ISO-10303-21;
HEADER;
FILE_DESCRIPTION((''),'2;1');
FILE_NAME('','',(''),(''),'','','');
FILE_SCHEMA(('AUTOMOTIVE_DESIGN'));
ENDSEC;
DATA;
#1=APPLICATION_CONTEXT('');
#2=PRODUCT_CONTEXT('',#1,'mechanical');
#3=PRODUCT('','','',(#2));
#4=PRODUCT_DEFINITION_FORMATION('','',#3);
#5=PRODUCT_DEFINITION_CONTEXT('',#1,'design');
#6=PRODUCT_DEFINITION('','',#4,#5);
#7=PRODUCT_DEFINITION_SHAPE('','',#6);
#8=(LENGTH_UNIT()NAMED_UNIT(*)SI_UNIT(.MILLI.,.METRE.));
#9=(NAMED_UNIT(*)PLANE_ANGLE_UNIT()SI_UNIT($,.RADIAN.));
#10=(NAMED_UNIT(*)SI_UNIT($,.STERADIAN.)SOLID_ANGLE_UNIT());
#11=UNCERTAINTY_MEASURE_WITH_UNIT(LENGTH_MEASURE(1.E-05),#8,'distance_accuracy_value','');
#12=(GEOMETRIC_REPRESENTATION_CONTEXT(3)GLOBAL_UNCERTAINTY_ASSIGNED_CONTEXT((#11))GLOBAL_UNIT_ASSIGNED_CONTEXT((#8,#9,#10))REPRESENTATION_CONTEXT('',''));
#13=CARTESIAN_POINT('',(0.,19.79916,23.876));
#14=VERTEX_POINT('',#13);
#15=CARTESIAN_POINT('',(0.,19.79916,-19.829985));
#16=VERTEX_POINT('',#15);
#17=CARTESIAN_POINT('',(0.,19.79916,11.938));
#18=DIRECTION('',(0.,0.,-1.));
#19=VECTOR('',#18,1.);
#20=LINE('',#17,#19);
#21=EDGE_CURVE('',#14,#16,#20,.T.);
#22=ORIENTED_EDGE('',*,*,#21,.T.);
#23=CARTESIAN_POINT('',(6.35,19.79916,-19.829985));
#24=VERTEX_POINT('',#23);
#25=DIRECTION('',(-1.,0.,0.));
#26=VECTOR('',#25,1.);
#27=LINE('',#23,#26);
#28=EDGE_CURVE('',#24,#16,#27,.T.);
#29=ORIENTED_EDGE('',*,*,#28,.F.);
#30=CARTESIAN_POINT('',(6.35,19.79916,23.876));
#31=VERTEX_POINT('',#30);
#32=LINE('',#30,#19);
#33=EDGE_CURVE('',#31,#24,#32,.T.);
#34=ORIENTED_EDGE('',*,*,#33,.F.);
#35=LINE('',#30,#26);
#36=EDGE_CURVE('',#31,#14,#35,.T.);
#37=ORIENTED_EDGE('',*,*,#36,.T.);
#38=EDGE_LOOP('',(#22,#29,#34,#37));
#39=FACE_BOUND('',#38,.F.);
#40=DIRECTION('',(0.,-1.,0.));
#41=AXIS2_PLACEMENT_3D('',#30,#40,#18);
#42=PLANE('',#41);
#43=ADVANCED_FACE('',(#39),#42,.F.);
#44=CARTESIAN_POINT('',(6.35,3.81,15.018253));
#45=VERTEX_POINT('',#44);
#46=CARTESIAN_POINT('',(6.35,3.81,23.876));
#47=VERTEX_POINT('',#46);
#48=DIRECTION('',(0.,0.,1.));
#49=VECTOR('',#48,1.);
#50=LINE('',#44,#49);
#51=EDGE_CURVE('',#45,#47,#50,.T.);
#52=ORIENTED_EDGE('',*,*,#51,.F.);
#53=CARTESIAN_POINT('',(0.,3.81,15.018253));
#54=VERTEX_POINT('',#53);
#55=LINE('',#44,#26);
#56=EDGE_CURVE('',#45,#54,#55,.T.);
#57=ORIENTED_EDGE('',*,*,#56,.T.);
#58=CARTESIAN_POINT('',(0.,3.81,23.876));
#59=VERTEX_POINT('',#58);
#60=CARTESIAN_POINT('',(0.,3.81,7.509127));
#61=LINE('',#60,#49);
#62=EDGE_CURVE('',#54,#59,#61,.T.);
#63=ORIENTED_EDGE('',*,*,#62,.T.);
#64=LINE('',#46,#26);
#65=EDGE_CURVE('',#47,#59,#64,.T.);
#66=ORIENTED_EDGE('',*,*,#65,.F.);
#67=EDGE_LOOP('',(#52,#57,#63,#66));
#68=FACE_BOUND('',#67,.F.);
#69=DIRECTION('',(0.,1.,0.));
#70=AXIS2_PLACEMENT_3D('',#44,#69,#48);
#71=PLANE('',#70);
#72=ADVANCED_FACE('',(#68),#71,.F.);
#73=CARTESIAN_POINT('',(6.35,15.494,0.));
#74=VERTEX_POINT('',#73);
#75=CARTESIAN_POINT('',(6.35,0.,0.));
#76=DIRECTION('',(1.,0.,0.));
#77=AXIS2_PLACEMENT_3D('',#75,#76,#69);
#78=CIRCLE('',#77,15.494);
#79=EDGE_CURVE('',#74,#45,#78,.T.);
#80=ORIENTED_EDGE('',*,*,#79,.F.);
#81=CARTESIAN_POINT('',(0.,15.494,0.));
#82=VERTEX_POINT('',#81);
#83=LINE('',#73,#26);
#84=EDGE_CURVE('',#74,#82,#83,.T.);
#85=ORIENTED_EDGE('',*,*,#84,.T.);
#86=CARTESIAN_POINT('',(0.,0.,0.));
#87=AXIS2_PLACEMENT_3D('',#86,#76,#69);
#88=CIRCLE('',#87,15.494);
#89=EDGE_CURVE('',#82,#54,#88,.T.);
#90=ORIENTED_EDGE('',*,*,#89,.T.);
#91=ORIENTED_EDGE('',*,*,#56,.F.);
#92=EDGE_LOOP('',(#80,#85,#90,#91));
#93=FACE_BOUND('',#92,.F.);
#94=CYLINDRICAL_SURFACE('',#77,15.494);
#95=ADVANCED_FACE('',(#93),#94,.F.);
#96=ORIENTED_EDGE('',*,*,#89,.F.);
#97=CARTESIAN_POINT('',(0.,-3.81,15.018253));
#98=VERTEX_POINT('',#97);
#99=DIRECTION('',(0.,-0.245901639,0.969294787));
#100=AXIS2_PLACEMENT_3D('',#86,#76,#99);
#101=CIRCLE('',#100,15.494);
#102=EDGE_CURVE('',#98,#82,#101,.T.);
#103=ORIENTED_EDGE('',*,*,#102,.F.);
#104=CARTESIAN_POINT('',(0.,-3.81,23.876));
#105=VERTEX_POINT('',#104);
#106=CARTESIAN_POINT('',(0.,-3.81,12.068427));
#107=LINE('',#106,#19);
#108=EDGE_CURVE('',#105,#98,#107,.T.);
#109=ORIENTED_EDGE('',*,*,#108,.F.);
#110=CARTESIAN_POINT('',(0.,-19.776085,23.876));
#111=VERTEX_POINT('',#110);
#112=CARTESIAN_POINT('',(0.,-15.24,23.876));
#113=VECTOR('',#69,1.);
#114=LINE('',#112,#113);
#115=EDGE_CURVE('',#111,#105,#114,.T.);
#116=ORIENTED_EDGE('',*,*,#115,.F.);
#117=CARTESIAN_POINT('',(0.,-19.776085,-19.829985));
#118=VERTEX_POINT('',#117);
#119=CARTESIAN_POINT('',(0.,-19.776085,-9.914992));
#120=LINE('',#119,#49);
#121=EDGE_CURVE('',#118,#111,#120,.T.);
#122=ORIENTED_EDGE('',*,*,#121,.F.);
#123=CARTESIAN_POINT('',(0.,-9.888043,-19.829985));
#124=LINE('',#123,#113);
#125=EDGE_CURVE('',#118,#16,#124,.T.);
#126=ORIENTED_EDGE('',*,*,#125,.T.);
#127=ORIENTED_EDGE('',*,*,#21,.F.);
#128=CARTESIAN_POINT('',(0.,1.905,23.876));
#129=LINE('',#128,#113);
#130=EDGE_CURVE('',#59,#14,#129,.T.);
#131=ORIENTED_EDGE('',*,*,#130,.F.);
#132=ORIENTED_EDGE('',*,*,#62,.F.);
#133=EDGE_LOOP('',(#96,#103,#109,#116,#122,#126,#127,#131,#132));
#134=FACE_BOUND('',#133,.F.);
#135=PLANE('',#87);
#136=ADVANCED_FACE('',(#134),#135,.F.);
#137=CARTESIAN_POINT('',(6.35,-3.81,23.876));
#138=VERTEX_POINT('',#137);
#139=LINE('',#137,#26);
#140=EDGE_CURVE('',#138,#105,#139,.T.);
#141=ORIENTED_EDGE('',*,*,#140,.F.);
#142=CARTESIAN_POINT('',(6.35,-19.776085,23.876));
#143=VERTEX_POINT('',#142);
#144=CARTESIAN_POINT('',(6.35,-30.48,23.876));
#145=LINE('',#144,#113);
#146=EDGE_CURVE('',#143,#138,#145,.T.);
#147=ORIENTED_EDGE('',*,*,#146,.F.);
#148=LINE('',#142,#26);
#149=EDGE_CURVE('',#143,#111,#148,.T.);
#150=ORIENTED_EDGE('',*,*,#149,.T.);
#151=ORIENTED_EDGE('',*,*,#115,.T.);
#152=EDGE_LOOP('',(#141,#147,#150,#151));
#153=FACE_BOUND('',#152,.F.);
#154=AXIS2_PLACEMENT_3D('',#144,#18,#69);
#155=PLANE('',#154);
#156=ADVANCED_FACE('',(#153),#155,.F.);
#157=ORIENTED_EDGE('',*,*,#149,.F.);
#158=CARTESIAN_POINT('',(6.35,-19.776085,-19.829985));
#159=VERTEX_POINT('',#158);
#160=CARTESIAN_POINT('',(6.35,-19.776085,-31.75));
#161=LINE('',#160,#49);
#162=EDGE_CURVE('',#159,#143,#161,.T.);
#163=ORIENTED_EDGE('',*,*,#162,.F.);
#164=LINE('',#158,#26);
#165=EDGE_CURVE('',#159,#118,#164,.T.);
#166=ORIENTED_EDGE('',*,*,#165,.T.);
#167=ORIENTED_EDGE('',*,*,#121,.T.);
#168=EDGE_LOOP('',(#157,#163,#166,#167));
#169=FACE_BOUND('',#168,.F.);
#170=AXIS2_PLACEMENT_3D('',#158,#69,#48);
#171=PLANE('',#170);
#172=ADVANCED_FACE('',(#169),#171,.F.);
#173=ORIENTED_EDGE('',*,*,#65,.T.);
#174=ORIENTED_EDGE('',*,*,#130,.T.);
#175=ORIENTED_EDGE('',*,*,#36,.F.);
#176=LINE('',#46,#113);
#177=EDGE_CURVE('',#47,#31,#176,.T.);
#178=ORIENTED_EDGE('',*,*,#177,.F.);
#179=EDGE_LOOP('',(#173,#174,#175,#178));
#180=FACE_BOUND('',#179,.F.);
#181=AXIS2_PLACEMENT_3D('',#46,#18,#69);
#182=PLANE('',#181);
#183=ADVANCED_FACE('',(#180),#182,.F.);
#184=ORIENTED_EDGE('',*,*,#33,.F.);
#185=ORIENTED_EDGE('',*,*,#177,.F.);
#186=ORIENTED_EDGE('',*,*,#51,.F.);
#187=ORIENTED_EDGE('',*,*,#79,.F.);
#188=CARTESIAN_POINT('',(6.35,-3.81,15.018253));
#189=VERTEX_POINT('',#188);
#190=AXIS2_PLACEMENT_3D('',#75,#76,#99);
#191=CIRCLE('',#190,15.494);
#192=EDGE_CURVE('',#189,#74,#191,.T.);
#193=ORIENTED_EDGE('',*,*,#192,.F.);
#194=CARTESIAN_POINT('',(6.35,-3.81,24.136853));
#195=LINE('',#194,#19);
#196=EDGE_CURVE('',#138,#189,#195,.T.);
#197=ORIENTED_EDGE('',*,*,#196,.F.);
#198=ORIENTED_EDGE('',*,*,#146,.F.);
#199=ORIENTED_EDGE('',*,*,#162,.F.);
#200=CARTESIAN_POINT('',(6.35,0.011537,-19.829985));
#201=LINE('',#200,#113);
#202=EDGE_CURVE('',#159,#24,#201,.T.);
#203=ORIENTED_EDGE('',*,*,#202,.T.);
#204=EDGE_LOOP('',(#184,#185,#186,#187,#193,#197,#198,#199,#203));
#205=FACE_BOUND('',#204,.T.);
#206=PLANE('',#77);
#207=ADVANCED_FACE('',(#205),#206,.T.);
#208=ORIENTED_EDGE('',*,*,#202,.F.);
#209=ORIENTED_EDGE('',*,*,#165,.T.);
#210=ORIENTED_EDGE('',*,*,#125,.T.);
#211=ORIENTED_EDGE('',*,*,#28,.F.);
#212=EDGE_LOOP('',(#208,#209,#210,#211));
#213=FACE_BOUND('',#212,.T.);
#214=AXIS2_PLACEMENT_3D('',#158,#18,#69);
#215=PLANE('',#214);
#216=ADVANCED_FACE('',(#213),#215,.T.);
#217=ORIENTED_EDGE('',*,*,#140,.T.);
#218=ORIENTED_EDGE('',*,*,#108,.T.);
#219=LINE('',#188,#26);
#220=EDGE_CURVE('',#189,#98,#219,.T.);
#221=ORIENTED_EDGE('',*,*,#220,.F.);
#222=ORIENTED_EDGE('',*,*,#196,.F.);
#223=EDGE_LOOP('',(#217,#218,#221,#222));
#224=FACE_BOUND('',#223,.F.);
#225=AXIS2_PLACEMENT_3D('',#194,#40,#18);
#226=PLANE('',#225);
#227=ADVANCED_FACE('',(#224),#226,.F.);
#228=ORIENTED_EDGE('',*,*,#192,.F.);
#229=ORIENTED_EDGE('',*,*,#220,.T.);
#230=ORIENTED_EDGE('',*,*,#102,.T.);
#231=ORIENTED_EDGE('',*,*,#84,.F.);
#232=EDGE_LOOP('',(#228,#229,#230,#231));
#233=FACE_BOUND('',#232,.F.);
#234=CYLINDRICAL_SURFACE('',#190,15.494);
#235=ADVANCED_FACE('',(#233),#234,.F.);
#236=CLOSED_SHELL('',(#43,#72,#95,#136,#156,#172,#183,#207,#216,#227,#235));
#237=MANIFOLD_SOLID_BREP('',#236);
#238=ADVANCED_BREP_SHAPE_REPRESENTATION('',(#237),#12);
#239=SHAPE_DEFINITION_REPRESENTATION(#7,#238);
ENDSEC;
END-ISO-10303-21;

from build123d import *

# Parameters (mm, degrees)
F0_W     = 60.96
F0_H     = 63.5
F1_DEPTH = 6.35
F3_DEPTH = 6.351
F6_DEPTH = 6.351
F7_W     = 39.5752452314
F7_H     = 11.9200152457
F8_DEPTH = 6.351


# Not quite as in the source:
# - a feature of the source that left no trace in its solid (it failed there, or was rolled back) is left out


with BuildPart() as f1:
    # F0 (on Right) → F1 (new body)
    with BuildSketch(Plane.YZ):
        Rectangle(F0_W, F0_H)
    extrude(amount=F1_DEPTH)

    # F2 (on face) → F3 (cut, through all)
    with BuildSketch(Plane.YZ.offset(6.35)):
        with BuildLine():
            ThreePointArc((-3.81, 15.0182534271), (-9.5139869666, -12.2289855671), (15.494, 0))
            ThreePointArc((15.494, 0), (12.2289855671, 9.5139869666), (3.81, 15.0182534271))
            Line((3.81, 15.0182534271), (-3.81, 15.0182534271))
        make_face()
        with BuildLine():
            Line((-3.81, 15.0182534271), (3.81, 15.0182534271))
            ThreePointArc((3.81, 15.0182534271), (0, 15.494), (-3.81, 15.0182534271))
        make_face()
        with BuildLine():
            ThreePointArc((-3.81, 15.0182534271), (0, 15.494), (3.81, 15.0182534271))
            Line((3.81, 15.0182534271), (3.81, 24.1368534271))
            Line((3.81, 24.1368534271), (-3.81, 24.1368534271))
            Line((-3.81, 24.1368534271), (-3.81, 15.0182534271))
        make_face()
    extrude(amount=-F3_DEPTH, mode=Mode.SUBTRACT)

    # F5 (on face) → F6 (cut, through all)
    with BuildSketch(Plane.YZ.offset(6.35)):
        Polygon((30.48, 31.75), (-30.48, 31.75), (-30.48, 23.876), (-3.81, 23.876), (-3.81, 24.1368534271), (3.81, 24.1368534271), (3.81, 23.876), (30.48, 23.876), align=None)
    extrude(amount=-F6_DEPTH, mode=Mode.SUBTRACT)

    # F7 (on face) → F8 (cut, through all)
    with BuildSketch(Plane.YZ.offset(6.35)):
        Polygon((-19.7760853916, 23.876), (-30.48, 23.876), (-30.48, -31.75), (-19.7760853916, -31.75), (-19.7760853916, -19.8299847543), align=None)
        Polygon((19.7991598397, 23.876), (19.7991598397, -19.8299847543), (19.7991598397, -31.75), (30.48, -31.75), (30.48, 23.876), align=None)
        with Locations((0.0115372241, -25.7899923772)):
            Rectangle(F7_W, F7_H)
    extrude(amount=-F8_DEPTH, mode=Mode.SUBTRACT)


solid = f1.part
